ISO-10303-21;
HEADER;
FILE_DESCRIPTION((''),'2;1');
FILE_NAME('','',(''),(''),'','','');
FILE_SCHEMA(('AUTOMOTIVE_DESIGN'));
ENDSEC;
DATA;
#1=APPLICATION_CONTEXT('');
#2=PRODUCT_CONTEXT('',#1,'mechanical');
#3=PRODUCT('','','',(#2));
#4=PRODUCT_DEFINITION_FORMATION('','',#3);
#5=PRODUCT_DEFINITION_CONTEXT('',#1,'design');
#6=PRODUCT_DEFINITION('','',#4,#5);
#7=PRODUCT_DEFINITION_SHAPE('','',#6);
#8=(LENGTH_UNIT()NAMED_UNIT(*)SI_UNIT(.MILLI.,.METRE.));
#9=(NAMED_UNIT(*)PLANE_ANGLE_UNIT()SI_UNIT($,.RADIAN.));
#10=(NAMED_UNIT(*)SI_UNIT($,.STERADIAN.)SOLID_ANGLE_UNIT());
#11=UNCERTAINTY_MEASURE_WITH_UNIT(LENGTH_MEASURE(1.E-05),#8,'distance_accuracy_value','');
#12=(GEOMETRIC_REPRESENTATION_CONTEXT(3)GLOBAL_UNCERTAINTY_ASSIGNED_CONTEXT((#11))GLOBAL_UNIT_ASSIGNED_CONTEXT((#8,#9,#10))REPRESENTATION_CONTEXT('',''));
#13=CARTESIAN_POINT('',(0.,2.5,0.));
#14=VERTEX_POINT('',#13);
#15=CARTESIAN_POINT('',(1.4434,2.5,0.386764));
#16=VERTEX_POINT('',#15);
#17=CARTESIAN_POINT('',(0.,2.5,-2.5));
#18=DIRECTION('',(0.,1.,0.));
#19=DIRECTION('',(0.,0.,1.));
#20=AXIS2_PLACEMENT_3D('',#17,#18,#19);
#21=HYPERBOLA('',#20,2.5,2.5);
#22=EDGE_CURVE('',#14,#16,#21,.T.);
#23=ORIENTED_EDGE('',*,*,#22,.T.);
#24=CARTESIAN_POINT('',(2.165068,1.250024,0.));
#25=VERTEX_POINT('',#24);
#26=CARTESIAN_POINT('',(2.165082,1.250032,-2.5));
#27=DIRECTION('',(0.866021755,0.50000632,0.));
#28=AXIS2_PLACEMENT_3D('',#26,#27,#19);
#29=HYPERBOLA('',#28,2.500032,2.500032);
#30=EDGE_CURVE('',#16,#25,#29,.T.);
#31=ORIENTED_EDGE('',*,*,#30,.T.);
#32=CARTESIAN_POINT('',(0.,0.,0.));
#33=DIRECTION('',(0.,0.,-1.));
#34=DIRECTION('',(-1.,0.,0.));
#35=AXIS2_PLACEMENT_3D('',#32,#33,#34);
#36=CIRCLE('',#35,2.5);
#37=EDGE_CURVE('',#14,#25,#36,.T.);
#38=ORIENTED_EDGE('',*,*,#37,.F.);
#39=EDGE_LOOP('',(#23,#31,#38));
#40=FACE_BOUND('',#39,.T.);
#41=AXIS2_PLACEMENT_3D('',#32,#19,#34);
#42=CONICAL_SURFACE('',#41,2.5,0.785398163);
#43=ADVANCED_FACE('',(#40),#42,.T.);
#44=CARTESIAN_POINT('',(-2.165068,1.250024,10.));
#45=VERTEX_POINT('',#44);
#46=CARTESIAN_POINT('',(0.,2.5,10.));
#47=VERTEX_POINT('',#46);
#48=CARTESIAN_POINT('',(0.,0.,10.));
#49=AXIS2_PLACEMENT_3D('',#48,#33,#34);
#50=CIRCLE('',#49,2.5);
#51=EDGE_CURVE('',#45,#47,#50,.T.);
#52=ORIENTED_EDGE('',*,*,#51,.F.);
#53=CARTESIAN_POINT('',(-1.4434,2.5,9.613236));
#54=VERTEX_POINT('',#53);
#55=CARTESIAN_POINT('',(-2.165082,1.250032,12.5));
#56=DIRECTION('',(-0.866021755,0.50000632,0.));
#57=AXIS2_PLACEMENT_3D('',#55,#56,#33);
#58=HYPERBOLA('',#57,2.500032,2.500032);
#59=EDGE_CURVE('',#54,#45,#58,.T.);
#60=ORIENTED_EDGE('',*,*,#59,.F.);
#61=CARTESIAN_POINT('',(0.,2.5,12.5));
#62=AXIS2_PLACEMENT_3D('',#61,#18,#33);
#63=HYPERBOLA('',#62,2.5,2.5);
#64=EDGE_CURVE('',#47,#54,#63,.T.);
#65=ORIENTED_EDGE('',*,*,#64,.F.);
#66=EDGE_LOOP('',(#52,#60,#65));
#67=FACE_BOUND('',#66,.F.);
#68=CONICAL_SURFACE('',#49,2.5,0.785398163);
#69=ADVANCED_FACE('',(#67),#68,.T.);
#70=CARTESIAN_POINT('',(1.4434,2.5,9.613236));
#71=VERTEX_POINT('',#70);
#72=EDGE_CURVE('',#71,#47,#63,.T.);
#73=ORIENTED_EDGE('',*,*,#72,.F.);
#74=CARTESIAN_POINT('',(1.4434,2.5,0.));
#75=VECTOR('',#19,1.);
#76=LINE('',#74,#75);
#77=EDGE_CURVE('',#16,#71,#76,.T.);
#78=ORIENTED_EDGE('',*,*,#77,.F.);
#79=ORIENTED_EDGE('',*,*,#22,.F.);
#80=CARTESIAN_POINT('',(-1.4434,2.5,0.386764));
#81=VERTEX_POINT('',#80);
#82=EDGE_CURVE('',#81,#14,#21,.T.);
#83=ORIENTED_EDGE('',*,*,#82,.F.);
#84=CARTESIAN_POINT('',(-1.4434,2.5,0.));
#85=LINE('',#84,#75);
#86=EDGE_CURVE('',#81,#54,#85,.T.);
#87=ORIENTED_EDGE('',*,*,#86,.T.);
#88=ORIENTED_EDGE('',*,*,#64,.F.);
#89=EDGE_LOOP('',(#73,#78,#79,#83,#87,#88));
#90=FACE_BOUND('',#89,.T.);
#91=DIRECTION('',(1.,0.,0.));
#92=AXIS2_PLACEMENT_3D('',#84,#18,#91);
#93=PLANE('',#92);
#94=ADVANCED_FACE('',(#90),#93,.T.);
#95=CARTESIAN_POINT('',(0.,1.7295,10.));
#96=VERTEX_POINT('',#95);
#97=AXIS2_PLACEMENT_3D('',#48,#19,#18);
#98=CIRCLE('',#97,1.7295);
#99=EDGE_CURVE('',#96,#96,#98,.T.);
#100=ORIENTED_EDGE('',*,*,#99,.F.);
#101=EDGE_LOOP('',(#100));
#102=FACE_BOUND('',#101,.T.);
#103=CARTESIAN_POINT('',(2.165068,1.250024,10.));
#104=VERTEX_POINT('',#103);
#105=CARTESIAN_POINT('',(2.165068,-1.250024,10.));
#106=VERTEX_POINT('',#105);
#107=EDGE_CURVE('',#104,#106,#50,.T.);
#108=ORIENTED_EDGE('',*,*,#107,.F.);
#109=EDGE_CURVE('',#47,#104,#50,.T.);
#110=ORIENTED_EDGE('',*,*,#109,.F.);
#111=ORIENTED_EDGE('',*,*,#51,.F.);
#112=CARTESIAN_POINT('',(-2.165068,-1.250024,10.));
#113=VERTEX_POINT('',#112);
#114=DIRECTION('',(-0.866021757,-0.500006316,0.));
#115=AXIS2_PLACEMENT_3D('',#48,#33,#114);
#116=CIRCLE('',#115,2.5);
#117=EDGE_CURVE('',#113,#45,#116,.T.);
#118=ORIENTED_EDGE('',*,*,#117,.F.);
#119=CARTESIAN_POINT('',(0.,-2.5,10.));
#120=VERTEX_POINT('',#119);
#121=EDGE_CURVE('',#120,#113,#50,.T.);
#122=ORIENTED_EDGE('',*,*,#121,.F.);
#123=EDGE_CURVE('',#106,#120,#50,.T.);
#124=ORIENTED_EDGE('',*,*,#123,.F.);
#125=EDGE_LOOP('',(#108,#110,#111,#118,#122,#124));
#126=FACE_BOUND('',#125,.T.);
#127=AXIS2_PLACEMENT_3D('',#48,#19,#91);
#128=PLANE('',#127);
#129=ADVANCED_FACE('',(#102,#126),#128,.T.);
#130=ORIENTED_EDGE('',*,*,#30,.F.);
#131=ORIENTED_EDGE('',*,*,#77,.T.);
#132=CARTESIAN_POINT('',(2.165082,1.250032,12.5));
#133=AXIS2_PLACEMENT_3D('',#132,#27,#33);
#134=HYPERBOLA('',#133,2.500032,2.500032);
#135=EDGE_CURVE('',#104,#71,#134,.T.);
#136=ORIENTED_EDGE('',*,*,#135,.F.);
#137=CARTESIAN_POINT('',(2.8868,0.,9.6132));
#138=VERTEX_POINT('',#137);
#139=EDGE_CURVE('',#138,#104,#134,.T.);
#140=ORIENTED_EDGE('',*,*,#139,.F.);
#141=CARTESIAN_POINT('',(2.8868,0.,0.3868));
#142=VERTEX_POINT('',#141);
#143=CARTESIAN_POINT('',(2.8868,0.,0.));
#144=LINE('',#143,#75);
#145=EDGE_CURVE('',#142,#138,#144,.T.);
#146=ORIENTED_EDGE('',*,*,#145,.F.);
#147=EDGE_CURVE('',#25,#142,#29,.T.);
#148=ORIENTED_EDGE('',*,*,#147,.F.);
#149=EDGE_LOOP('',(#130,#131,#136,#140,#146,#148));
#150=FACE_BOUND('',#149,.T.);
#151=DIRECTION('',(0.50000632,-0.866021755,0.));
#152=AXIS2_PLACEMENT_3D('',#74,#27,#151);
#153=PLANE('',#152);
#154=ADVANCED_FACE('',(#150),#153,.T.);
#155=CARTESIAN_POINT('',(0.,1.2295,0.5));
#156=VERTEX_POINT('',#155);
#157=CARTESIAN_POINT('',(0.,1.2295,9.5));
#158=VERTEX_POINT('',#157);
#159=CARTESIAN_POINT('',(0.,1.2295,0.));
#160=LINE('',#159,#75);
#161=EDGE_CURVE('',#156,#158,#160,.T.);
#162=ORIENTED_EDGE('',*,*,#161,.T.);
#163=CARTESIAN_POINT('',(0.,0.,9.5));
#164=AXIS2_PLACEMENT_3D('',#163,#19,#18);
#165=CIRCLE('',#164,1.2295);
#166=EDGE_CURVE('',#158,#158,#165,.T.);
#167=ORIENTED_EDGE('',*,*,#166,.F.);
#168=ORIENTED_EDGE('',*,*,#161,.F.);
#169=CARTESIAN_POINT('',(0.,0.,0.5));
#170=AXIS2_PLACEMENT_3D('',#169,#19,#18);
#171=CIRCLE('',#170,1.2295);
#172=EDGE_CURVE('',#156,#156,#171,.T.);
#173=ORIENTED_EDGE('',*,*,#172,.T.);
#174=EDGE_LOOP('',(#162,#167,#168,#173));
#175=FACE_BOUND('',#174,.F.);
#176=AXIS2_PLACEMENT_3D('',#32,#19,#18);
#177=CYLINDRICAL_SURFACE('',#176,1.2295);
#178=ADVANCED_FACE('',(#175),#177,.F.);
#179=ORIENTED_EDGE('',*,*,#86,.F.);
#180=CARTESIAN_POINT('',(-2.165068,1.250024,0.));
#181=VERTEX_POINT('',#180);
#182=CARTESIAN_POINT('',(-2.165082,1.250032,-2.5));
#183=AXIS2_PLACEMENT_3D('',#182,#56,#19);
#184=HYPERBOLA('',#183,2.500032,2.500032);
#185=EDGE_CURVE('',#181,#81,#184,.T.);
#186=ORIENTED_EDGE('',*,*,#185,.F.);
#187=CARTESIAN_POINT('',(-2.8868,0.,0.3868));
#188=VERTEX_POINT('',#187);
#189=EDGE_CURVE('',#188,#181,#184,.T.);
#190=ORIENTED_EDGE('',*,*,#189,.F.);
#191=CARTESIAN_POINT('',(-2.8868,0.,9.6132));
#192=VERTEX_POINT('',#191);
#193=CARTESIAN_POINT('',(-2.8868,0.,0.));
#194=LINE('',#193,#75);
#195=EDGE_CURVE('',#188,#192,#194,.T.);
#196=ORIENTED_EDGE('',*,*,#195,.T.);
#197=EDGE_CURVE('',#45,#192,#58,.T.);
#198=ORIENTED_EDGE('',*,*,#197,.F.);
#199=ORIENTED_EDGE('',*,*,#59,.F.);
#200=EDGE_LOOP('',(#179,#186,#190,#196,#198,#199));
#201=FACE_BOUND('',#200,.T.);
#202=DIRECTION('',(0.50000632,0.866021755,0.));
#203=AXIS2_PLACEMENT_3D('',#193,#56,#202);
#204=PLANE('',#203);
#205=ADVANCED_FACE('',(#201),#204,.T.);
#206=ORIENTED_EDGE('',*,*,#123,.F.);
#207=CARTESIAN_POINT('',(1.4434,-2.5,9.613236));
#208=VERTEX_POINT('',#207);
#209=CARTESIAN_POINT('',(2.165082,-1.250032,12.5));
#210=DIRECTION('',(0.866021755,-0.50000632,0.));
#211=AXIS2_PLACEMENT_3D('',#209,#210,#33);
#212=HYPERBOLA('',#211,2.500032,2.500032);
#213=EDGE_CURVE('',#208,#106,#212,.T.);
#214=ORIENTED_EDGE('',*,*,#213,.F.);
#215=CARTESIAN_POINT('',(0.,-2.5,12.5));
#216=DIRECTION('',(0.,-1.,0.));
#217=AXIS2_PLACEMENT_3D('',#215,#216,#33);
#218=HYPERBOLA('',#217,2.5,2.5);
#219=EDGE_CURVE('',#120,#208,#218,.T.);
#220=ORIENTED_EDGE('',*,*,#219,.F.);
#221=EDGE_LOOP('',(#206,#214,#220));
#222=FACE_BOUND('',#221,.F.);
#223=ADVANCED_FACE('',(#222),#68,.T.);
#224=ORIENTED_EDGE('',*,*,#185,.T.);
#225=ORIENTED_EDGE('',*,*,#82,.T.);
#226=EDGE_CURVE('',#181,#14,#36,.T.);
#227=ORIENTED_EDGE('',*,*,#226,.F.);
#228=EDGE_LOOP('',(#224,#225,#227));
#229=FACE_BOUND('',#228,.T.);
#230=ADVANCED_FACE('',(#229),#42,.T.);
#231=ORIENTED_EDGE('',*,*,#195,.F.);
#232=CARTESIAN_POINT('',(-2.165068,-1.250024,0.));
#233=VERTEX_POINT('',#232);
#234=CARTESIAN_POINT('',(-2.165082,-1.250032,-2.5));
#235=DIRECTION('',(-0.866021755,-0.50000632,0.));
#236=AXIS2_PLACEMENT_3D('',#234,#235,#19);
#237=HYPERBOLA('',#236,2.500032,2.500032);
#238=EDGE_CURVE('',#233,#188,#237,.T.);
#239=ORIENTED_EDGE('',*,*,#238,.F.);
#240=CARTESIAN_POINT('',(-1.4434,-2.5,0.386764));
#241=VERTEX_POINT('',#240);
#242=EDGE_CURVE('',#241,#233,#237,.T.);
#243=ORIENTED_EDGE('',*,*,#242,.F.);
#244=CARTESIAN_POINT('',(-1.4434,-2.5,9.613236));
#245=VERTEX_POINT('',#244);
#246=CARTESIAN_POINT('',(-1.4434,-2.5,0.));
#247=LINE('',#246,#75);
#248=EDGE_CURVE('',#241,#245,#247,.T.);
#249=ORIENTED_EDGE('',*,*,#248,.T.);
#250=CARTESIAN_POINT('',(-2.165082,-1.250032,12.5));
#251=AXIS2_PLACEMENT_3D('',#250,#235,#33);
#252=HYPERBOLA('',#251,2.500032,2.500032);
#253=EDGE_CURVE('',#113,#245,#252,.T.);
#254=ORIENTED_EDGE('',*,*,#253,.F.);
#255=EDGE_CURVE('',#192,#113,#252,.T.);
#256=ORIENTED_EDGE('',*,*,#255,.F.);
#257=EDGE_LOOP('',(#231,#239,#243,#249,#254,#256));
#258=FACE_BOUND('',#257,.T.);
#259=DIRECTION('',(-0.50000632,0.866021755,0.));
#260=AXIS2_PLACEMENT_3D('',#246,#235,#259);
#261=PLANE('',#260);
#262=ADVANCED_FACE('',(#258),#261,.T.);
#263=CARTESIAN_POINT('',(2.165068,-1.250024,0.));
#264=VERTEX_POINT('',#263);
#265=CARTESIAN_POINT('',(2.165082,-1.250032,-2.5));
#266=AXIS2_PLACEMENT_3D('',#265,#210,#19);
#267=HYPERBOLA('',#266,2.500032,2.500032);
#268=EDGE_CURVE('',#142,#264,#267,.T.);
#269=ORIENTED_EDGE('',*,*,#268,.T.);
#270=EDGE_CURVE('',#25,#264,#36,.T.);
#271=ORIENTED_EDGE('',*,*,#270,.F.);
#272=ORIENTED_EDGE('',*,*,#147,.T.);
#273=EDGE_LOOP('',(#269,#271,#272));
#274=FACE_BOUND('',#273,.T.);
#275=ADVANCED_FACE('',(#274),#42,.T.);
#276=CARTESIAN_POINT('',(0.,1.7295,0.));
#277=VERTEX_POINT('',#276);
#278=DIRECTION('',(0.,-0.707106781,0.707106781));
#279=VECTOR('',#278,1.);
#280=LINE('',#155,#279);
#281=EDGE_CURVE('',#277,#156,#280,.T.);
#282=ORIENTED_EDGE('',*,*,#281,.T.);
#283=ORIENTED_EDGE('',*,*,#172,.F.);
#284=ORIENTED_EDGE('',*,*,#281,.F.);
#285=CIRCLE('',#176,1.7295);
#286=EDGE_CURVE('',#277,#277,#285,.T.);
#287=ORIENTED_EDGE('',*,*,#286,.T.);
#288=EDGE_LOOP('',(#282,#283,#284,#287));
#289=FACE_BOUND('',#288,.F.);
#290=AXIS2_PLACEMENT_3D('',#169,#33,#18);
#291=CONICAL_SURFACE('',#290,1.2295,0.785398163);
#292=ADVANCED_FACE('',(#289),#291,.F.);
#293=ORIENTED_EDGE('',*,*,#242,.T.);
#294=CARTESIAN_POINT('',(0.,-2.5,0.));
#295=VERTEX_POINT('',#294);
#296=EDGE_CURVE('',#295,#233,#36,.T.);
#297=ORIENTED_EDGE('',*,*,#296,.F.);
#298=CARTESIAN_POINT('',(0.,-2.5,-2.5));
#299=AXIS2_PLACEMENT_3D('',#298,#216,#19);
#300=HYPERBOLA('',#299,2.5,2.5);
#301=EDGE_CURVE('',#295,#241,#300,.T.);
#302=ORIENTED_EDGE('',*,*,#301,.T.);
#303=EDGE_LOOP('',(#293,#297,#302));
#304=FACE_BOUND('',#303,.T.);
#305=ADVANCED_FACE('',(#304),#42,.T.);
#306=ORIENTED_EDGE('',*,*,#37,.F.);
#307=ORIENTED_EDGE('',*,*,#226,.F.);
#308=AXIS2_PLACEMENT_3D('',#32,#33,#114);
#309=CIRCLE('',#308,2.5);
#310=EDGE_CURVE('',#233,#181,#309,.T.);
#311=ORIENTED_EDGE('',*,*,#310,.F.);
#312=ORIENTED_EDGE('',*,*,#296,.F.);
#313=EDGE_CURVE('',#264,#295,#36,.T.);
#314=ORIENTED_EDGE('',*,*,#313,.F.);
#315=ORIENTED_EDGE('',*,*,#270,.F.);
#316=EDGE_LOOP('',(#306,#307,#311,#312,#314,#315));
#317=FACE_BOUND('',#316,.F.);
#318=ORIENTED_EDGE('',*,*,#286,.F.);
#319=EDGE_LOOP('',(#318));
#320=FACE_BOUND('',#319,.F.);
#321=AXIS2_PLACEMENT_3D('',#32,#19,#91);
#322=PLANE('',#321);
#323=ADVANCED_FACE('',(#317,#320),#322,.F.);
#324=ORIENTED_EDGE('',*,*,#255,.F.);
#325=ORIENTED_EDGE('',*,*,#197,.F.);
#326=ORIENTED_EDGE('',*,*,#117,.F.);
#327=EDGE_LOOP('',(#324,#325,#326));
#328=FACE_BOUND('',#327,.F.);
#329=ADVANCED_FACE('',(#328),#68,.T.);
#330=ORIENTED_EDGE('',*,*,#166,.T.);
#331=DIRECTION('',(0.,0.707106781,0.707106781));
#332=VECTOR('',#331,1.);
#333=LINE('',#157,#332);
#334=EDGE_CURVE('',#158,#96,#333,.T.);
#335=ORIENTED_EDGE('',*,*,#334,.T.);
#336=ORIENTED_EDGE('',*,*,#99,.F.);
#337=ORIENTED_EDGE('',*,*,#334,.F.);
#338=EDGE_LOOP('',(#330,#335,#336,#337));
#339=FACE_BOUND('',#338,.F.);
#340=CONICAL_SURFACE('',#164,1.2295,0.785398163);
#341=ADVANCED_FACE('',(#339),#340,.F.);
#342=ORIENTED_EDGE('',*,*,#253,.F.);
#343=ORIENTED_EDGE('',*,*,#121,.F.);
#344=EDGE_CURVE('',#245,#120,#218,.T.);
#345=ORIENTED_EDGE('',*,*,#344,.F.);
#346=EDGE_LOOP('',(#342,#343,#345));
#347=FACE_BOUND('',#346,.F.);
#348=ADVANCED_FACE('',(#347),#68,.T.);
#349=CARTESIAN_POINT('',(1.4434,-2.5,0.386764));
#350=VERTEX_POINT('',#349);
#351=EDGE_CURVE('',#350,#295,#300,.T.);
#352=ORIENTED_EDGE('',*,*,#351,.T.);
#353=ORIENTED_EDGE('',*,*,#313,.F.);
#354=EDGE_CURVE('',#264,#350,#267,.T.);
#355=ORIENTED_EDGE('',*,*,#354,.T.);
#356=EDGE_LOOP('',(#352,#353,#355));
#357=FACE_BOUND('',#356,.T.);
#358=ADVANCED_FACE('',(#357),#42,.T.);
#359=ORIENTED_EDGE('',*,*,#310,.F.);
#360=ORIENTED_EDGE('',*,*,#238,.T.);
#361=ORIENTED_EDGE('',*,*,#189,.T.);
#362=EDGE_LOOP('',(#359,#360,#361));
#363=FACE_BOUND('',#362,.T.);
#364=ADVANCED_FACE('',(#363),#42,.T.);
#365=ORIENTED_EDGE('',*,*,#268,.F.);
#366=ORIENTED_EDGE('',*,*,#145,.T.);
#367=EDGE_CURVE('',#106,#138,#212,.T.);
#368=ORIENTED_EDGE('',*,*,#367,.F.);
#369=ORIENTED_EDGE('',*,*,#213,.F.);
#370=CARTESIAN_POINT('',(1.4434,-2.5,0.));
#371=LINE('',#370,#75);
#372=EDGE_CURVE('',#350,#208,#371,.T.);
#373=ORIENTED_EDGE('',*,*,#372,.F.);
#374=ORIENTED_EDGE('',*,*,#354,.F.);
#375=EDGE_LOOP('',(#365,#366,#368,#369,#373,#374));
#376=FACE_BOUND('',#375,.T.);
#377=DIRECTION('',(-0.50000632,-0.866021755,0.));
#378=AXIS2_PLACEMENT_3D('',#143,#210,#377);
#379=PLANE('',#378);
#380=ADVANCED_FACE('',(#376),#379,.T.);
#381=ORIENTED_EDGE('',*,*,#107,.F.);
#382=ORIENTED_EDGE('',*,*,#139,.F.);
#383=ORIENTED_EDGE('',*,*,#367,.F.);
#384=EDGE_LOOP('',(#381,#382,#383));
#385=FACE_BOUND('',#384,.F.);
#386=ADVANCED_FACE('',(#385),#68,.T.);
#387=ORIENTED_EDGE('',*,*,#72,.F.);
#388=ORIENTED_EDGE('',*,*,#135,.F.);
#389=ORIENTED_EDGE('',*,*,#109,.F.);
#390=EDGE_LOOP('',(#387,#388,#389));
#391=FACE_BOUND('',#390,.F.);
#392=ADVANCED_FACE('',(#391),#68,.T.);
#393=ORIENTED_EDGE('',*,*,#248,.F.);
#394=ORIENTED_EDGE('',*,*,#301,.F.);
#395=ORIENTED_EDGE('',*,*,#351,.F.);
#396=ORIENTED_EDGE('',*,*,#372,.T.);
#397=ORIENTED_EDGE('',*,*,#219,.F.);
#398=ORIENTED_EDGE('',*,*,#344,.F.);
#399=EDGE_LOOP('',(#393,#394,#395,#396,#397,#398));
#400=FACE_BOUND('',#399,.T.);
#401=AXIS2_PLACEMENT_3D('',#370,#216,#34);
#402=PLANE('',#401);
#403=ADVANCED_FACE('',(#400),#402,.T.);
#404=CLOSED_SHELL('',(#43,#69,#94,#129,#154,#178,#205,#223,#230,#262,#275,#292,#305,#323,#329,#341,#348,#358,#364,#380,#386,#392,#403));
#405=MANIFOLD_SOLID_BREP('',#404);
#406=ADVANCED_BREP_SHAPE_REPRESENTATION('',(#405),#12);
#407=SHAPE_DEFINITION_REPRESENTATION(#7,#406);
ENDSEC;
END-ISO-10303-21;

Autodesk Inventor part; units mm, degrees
ref_plane "YZ Plane" through (0, 0, 0) normal (1, 0, 0) x (0, 1, 0)
ref_plane "XZ Plane" through (0, 0, 0) normal (0, 1, 0) x (-1, 0, 0)
ref_plane "XY Plane" through (0, 0, 0) normal (0, 0, 1) x (1, 0, 0)
sketch "Sketch1" plane through (0, 0, 0) normal (0, 0, 1) x (1, 0, 0)
  line L0 (1.4434, 2.5) -> (2.8868, 0)
  line L1 (2.8868, 0) -> (1.4434, -2.5)
  line L2 (1.4434, -2.5) -> (-1.4434, -2.5)
  line L3 (-1.4434, -2.5) -> (-2.8868, 0)
  line L4 (-2.8868, 0) -> (-1.4434, 2.5)
  line L5 (-1.4434, 2.5) -> (1.4434, 2.5)
  point P0 (0, 0)
  point P1 (0, 0)
  dimension "d0" = 5
extrude "Extrusion1" add sketch "Sketch1" along normal blind 10
sketch "Sketch3" plane through (0, 0, 0) normal (0, 0, -1) x (-1, 0, 0)
  line L0 (1.4434, 2.5) -> (-1.4434, 2.5) projected
  circle A0 centre (0, 0) radius 2.5
hole "Hole1" at (0, 0, 0) direction (0, 0, 1) diameter 2.459 end through all thread size "M3x0.5" class "6H" standard "ISO Metric profile"
chamfer "Chamfer2" distance 0.5 angle 45 1 edges at (0, -1.2295, 0)
sketch "Sketch4" plane through (0, 0, 0) normal (0, 0, -1) x (-1, 0, 0)
  circle A0 centre (0, 0) radius 1.7295 projected
  circle A1 centre (0, 0) radius 2.5
  circle A2 centre (0, 0) radius 6
extrude "Extrusion3" cut sketch "Sketch4" against normal blind 1 draft -45 contours A2
ref_plane "Work Plane1" through (0, 0, 5) normal (0, 0, -1) x (-1, 0, 0)
mirror "Mirror2" about plane through (0, 0, 5) normal (0, 0, -1) of "Extrusion3"
chamfer "Chamfer3" distance 0.5 angle 45 1 edges at (0, -1.2295, 10)
properties part number "support m3 10" material "Stainless Steel"
